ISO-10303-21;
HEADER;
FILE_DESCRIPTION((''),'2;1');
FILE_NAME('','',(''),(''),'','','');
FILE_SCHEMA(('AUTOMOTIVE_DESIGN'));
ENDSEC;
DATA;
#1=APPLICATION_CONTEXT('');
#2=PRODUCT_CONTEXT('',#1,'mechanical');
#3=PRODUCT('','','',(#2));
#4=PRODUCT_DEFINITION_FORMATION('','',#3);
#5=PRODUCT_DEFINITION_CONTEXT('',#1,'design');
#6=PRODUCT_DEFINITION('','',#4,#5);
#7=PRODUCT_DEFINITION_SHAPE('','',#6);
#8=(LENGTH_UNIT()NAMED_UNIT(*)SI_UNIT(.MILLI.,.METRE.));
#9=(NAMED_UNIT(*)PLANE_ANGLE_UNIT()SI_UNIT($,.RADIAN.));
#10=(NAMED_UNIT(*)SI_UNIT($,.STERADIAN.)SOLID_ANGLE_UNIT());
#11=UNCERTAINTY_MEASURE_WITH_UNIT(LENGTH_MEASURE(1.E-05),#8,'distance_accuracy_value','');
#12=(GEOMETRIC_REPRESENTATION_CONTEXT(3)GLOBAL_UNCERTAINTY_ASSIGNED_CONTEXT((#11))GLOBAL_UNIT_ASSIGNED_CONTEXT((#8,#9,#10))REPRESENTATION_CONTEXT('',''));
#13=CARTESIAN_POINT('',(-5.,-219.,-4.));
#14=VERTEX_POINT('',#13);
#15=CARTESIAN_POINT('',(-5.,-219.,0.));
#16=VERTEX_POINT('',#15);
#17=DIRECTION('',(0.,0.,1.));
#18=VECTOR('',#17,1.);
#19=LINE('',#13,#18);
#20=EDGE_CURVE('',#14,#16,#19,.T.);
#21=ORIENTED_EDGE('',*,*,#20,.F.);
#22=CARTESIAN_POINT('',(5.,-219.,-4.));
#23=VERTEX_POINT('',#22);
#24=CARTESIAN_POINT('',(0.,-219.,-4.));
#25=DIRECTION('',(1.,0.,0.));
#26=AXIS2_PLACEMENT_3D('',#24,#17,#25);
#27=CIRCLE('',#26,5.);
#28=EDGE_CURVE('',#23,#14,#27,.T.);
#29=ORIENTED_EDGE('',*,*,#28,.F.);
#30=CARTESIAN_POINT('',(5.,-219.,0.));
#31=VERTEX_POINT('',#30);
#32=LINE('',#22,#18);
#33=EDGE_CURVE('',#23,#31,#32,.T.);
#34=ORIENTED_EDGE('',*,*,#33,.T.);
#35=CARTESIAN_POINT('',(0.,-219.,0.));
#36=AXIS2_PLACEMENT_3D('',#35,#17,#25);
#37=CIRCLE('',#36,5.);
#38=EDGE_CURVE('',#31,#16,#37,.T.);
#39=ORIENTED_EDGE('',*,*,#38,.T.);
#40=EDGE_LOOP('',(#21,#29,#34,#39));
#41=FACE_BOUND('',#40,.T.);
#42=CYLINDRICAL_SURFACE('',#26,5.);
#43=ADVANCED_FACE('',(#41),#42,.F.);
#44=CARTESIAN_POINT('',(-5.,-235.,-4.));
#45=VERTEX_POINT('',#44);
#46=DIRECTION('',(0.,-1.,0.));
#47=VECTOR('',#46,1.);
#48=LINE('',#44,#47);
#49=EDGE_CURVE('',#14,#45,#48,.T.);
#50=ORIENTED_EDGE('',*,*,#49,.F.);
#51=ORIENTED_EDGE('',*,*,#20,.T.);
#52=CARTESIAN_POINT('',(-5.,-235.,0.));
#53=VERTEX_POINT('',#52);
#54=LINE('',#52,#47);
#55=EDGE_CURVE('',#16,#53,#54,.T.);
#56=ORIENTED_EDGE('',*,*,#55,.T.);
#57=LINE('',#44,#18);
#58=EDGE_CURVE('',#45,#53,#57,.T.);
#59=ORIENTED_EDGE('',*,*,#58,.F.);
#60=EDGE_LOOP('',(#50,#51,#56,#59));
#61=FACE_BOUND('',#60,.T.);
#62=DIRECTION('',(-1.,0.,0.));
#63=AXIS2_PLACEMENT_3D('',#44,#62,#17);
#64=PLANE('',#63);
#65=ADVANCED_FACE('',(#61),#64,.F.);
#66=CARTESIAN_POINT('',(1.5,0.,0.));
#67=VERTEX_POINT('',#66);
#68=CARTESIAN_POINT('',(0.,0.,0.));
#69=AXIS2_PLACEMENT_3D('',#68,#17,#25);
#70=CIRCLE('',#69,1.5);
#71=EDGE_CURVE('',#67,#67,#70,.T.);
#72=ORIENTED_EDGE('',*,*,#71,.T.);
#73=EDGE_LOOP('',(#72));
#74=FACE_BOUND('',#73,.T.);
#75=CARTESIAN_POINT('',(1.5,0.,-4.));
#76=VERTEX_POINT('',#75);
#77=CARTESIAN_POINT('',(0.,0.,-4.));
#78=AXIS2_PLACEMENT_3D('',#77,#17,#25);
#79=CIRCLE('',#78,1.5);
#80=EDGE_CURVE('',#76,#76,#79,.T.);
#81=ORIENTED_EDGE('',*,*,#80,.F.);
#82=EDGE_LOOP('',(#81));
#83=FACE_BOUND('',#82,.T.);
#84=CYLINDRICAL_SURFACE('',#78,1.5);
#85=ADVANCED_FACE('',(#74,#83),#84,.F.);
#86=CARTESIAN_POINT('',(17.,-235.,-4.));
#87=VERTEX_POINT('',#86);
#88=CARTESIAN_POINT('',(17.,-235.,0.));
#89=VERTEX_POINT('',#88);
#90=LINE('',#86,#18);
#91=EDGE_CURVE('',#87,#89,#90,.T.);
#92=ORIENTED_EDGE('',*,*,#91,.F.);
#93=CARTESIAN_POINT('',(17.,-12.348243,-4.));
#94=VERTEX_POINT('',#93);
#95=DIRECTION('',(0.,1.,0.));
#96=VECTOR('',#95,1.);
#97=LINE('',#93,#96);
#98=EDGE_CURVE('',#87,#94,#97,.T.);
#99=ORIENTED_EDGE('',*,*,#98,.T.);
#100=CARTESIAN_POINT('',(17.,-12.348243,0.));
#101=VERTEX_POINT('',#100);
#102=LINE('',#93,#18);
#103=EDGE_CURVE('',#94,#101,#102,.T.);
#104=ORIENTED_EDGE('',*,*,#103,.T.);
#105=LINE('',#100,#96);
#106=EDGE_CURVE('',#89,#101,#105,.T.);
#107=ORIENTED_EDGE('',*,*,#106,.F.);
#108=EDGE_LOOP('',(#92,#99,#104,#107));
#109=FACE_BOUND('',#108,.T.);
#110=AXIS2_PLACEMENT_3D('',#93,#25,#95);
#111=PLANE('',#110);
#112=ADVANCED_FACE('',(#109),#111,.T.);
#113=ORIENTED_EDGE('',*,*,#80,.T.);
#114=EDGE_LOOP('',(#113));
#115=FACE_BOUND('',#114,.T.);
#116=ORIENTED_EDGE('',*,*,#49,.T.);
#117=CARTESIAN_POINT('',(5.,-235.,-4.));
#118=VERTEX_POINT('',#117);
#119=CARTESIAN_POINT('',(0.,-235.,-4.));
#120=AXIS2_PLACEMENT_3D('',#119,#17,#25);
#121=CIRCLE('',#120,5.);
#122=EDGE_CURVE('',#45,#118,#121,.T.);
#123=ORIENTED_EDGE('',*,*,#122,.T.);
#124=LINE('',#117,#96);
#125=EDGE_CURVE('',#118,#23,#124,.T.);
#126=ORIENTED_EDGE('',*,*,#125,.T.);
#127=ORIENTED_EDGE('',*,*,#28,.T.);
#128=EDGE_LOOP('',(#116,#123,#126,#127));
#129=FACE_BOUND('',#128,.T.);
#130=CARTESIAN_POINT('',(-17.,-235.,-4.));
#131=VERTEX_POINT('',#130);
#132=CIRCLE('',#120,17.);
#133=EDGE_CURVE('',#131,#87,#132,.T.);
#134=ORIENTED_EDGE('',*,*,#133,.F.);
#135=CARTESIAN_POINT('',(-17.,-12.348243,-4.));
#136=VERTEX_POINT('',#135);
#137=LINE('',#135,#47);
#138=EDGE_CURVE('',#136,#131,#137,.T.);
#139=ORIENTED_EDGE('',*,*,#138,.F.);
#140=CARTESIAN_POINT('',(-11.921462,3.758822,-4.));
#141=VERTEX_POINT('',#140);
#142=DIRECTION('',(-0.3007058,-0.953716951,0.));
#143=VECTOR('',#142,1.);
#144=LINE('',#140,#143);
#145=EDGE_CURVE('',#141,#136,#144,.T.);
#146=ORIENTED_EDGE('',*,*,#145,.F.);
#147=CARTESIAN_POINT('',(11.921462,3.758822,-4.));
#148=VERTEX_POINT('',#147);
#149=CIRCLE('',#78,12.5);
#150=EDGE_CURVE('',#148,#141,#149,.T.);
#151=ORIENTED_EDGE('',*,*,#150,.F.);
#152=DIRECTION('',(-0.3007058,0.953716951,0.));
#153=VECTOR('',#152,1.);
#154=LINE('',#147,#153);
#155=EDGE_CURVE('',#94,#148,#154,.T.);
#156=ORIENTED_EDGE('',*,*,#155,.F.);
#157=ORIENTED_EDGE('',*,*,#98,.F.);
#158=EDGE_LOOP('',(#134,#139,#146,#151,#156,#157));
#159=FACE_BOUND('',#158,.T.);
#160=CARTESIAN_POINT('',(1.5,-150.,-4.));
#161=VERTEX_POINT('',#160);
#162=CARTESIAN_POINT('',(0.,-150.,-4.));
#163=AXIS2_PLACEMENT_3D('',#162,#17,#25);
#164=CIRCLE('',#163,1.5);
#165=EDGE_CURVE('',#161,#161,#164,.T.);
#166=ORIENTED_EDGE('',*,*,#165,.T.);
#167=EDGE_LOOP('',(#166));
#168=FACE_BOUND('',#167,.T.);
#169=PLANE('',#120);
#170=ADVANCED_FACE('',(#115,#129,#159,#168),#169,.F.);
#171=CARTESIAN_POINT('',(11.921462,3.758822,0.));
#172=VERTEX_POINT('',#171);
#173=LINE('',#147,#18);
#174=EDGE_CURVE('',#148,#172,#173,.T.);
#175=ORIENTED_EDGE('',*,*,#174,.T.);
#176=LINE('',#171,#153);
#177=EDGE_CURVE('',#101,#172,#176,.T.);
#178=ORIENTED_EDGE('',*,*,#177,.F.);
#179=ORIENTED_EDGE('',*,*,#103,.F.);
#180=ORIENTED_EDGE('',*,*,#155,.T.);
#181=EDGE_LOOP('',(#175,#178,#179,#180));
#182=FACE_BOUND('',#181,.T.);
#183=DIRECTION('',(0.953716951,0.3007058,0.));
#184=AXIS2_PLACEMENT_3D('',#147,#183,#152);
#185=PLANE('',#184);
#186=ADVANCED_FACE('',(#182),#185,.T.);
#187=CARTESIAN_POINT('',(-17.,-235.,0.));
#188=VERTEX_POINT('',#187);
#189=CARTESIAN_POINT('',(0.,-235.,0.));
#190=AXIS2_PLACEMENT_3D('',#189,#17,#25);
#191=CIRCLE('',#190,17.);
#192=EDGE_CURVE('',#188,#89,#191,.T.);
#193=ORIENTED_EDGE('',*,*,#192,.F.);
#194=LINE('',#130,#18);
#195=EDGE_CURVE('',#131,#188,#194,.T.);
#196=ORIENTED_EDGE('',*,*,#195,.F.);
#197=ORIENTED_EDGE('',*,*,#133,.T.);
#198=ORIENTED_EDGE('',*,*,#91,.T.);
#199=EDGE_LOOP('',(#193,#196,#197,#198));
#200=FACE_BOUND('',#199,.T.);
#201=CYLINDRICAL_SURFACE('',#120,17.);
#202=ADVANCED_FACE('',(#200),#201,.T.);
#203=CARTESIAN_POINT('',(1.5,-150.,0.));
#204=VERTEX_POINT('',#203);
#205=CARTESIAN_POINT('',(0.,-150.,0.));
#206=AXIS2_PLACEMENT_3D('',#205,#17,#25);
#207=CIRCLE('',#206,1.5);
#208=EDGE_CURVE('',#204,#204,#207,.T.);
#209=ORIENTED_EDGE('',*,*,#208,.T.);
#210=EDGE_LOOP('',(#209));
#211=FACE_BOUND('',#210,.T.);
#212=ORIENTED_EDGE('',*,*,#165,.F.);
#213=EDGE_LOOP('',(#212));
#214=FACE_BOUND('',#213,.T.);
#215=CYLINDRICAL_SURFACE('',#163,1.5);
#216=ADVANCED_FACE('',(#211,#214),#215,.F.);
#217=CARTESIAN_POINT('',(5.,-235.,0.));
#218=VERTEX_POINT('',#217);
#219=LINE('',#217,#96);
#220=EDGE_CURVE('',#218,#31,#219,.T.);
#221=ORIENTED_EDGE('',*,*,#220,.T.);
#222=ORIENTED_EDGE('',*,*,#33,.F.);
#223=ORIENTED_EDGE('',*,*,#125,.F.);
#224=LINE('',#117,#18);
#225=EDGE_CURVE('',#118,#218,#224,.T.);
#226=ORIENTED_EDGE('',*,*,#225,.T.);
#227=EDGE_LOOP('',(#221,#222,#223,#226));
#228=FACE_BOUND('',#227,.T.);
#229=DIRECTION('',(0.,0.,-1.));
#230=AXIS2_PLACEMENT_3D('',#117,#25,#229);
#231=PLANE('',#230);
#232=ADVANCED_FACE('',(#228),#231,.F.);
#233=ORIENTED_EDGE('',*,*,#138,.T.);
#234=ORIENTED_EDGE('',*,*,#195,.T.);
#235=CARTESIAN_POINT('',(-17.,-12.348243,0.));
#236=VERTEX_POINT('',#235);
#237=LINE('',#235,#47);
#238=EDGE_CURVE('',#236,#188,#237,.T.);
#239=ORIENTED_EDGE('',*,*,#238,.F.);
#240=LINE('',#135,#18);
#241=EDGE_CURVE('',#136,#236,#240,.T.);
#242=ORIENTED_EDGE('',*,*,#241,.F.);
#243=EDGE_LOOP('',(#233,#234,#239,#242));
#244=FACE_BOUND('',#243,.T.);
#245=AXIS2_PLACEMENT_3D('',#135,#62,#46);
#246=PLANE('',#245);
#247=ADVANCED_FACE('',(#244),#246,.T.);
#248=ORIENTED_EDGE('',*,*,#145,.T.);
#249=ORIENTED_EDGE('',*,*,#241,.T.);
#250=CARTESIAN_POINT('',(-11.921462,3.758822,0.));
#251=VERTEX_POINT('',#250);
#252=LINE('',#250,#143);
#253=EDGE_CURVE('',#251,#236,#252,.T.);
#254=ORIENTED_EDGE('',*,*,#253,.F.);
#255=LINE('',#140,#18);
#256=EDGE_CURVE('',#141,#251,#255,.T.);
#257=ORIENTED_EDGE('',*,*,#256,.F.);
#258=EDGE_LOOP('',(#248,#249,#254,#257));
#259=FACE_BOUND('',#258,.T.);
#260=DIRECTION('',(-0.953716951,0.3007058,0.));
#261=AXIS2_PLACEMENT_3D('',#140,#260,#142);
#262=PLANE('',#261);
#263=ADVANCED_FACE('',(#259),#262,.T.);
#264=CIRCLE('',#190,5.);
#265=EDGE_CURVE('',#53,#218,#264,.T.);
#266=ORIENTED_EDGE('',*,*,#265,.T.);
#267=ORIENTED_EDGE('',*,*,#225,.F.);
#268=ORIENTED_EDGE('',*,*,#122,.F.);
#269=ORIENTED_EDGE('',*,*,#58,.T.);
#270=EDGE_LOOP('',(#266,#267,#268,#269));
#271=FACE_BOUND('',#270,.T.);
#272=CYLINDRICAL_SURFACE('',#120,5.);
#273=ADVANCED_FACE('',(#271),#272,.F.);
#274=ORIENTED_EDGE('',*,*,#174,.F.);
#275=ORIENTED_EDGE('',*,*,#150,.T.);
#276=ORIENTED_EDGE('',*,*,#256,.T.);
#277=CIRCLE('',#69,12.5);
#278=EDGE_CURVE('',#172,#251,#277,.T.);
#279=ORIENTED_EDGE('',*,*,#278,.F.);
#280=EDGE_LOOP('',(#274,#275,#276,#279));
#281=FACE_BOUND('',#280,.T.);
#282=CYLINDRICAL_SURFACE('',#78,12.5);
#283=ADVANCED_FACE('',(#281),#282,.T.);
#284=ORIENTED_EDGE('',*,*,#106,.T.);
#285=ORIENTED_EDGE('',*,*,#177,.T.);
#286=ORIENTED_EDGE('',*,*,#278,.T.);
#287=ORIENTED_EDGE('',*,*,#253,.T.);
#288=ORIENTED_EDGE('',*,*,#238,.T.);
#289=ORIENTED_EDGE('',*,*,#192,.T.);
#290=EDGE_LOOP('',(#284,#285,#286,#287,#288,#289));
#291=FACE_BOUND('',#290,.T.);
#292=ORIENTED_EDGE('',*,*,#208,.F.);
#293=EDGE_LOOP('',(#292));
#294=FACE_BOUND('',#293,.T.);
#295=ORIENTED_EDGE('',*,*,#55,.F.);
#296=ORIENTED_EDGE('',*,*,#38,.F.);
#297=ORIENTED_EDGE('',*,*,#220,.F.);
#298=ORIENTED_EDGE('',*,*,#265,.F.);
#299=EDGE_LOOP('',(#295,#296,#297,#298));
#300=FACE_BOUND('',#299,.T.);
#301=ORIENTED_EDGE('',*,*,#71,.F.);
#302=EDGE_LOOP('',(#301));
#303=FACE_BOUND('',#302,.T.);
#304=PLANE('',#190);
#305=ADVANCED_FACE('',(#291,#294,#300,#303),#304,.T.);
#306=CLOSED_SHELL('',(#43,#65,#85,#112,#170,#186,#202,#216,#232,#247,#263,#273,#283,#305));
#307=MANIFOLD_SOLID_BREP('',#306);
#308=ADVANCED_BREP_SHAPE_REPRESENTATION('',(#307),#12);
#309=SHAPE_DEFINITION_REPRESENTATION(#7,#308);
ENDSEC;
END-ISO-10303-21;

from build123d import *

# Parameters (mm, degrees)
ESQUISSE1_R               = 1.5
T_LE_DE_BASE_PLI_E1_DEPTH = 4


# Sheet-metal steps are written as plain solids
with BuildPart() as part:
    # Esquisse1 → Tôle de base pliée1 (new body)
    with BuildSketch(Plane.XY):
        with BuildLine():
            Line((-17, -12.348242597), (-17, -235))
            ThreePointArc((-17, -235), (0, -252), (17, -235))
            Line((17, -235), (17, -12.348242597))
            Line((17, -12.348242597), (11.921461884, 3.758822494))
            ThreePointArc((11.921461884, 3.758822494), (0, 12.5), (-11.921461884, 3.758822494))
            Line((-11.921461884, 3.758822494), (-17, -12.348242597))
        make_face()
        Circle(ESQUISSE1_R, mode=Mode.SUBTRACT)
        with Locations((0, -150)):
            Circle(ESQUISSE1_R, mode=Mode.SUBTRACT)
        with BuildLine():
            Line((-5, -235), (-5, -219))
            ThreePointArc((-5, -219), (0, -214), (5, -219))
            Line((5, -219), (5, -235))
            ThreePointArc((5, -235), (0, -240), (-5, -235))
        make_face(mode=Mode.SUBTRACT)
    extrude(amount=-T_LE_DE_BASE_PLI_E1_DEPTH)


solid = part.part
